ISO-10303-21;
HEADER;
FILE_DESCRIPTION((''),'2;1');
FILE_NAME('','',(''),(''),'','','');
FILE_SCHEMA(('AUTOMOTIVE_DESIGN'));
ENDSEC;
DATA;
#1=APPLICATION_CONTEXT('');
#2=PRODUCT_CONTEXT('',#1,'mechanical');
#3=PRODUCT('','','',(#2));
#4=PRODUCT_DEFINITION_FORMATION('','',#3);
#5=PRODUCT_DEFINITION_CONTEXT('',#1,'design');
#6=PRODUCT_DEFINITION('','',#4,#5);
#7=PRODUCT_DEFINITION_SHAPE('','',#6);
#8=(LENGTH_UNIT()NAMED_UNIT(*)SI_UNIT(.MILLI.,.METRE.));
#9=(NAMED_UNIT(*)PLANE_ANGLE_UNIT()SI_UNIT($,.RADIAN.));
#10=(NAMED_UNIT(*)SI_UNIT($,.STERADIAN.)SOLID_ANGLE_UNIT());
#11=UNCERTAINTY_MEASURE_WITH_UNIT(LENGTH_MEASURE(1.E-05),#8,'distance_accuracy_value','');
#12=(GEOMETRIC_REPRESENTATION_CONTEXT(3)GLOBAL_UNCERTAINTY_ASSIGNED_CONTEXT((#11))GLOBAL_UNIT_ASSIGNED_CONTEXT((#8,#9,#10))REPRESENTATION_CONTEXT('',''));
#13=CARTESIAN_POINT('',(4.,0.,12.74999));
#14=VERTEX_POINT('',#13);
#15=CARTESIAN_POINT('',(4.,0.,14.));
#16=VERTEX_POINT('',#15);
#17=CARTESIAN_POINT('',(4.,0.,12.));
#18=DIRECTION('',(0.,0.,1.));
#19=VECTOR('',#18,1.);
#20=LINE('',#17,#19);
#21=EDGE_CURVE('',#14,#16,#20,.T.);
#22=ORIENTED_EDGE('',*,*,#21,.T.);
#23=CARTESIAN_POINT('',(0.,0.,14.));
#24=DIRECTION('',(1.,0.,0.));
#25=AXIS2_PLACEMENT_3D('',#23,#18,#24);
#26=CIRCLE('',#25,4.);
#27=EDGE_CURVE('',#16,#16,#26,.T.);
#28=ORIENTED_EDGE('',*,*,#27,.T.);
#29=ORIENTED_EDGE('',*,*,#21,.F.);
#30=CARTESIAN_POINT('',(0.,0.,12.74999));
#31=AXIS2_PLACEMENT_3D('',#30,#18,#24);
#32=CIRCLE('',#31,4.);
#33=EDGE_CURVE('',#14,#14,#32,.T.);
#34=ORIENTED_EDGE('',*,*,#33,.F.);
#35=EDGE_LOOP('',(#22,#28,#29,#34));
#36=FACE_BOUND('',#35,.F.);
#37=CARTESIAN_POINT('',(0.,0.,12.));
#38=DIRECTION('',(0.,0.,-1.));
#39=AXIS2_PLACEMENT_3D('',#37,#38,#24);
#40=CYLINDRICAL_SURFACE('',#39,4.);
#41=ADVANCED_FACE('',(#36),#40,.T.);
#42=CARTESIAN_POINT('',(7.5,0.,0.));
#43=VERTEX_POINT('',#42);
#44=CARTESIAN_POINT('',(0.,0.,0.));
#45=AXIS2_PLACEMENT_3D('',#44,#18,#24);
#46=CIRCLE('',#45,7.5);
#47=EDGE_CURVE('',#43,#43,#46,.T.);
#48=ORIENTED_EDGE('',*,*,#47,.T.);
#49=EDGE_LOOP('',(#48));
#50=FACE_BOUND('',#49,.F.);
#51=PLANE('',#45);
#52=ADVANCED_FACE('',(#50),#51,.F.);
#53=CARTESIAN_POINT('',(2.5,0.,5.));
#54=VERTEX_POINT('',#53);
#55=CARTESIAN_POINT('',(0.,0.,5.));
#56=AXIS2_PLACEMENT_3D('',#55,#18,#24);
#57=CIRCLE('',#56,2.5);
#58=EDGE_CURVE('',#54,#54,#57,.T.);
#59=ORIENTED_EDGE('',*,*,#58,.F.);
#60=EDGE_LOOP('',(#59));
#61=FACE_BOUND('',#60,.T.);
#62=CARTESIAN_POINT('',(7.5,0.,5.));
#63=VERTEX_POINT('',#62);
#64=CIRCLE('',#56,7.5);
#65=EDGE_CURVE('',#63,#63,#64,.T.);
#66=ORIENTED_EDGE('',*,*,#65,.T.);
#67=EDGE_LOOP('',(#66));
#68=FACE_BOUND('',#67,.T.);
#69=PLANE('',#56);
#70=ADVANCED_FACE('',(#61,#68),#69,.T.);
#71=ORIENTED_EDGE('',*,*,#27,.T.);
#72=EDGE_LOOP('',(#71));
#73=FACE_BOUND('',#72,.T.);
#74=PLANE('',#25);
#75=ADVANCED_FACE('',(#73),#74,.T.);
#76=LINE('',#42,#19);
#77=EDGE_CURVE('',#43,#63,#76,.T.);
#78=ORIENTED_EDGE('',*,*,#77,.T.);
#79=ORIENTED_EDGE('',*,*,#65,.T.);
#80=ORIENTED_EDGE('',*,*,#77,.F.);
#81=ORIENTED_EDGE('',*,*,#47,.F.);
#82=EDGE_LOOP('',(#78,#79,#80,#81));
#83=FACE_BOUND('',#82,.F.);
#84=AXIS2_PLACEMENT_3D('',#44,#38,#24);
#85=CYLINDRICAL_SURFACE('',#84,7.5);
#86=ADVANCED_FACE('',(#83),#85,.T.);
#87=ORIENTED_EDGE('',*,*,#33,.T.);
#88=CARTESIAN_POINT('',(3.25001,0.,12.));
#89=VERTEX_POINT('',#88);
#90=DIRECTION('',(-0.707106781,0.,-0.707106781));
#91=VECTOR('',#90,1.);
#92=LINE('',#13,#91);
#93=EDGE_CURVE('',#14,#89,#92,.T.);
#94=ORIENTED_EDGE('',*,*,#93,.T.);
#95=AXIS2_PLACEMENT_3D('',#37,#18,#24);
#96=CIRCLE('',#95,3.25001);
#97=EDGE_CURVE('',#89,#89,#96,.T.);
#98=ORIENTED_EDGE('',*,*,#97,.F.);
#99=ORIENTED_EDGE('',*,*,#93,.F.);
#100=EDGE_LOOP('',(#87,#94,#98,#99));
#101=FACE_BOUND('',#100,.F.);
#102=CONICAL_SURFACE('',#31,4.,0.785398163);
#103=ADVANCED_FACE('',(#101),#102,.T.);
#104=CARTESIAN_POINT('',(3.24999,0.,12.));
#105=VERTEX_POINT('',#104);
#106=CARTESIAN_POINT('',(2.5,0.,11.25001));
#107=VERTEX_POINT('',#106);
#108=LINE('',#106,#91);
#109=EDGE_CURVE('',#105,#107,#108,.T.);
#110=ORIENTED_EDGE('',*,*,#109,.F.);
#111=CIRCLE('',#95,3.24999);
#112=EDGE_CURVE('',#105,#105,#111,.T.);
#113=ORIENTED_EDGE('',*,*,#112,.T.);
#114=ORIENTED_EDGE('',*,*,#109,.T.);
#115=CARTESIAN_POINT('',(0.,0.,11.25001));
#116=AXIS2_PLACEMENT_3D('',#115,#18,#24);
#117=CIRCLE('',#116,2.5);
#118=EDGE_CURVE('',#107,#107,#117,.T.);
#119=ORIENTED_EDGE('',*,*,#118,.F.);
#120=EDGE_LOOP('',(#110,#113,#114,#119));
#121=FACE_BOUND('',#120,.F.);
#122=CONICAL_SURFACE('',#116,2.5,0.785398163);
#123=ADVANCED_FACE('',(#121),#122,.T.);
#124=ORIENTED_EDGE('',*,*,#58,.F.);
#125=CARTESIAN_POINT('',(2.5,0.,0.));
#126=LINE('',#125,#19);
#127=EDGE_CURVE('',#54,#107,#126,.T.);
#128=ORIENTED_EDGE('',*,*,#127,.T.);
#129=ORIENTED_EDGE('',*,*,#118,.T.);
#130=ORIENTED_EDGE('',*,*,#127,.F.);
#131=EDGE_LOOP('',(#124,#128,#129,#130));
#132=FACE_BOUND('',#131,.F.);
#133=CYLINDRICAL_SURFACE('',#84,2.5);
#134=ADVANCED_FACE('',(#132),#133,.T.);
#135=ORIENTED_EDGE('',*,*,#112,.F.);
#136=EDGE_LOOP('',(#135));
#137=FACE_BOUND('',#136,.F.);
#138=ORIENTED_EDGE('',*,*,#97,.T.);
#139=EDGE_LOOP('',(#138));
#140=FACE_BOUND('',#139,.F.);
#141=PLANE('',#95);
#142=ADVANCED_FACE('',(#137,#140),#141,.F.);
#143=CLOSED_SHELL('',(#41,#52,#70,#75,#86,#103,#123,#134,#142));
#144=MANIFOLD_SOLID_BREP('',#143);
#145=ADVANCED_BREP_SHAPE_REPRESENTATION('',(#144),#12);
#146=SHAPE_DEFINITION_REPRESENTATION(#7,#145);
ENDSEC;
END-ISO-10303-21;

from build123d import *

# Parameters (mm, degrees)
F6_R      = 2.5
F7_DEPTH  = 12
F6_R_2    = 7.5
F8_DEPTH  = 5
F9_R      = 4
F9_R_2    = 2.5
F10_DEPTH = 2
F11_SIZE  = 0.74999


# Not quite as in the source:
# - a fillet or chamfer is up to 0.001 mm smaller than in the source, because OpenCascade refuses the exact size


with BuildPart() as f7:
    # F6 (on Top) → F7 (new body)
    with BuildSketch(Plane.XY):
        Circle(F6_R)
    extrude(amount=F7_DEPTH)

    # F6 (on Top) → F8 (join)
    with BuildSketch(Plane.XY):
        Circle(F6_R_2)
        Circle(F6_R, mode=Mode.SUBTRACT)
    extrude(amount=F8_DEPTH)

    # F9 (on face) → F10 (join)
    with BuildSketch(Plane.XY.offset(12)):
        Circle(F9_R)
        Circle(F9_R_2, mode=Mode.SUBTRACT)
        Circle(F9_R_2)
    extrude(amount=F10_DEPTH)

    # F11 (size 0.75 in the source; OpenCascade refuses exactly that, so slightly less here)
    f11_edges = [f7.edges().sort_by_distance(p)[0] for p in [
        (-4, 0, 12),
        (-2.5, 0, 12),
    ]]
    chamfer(f11_edges, length=F11_SIZE)


solid = f7.part
